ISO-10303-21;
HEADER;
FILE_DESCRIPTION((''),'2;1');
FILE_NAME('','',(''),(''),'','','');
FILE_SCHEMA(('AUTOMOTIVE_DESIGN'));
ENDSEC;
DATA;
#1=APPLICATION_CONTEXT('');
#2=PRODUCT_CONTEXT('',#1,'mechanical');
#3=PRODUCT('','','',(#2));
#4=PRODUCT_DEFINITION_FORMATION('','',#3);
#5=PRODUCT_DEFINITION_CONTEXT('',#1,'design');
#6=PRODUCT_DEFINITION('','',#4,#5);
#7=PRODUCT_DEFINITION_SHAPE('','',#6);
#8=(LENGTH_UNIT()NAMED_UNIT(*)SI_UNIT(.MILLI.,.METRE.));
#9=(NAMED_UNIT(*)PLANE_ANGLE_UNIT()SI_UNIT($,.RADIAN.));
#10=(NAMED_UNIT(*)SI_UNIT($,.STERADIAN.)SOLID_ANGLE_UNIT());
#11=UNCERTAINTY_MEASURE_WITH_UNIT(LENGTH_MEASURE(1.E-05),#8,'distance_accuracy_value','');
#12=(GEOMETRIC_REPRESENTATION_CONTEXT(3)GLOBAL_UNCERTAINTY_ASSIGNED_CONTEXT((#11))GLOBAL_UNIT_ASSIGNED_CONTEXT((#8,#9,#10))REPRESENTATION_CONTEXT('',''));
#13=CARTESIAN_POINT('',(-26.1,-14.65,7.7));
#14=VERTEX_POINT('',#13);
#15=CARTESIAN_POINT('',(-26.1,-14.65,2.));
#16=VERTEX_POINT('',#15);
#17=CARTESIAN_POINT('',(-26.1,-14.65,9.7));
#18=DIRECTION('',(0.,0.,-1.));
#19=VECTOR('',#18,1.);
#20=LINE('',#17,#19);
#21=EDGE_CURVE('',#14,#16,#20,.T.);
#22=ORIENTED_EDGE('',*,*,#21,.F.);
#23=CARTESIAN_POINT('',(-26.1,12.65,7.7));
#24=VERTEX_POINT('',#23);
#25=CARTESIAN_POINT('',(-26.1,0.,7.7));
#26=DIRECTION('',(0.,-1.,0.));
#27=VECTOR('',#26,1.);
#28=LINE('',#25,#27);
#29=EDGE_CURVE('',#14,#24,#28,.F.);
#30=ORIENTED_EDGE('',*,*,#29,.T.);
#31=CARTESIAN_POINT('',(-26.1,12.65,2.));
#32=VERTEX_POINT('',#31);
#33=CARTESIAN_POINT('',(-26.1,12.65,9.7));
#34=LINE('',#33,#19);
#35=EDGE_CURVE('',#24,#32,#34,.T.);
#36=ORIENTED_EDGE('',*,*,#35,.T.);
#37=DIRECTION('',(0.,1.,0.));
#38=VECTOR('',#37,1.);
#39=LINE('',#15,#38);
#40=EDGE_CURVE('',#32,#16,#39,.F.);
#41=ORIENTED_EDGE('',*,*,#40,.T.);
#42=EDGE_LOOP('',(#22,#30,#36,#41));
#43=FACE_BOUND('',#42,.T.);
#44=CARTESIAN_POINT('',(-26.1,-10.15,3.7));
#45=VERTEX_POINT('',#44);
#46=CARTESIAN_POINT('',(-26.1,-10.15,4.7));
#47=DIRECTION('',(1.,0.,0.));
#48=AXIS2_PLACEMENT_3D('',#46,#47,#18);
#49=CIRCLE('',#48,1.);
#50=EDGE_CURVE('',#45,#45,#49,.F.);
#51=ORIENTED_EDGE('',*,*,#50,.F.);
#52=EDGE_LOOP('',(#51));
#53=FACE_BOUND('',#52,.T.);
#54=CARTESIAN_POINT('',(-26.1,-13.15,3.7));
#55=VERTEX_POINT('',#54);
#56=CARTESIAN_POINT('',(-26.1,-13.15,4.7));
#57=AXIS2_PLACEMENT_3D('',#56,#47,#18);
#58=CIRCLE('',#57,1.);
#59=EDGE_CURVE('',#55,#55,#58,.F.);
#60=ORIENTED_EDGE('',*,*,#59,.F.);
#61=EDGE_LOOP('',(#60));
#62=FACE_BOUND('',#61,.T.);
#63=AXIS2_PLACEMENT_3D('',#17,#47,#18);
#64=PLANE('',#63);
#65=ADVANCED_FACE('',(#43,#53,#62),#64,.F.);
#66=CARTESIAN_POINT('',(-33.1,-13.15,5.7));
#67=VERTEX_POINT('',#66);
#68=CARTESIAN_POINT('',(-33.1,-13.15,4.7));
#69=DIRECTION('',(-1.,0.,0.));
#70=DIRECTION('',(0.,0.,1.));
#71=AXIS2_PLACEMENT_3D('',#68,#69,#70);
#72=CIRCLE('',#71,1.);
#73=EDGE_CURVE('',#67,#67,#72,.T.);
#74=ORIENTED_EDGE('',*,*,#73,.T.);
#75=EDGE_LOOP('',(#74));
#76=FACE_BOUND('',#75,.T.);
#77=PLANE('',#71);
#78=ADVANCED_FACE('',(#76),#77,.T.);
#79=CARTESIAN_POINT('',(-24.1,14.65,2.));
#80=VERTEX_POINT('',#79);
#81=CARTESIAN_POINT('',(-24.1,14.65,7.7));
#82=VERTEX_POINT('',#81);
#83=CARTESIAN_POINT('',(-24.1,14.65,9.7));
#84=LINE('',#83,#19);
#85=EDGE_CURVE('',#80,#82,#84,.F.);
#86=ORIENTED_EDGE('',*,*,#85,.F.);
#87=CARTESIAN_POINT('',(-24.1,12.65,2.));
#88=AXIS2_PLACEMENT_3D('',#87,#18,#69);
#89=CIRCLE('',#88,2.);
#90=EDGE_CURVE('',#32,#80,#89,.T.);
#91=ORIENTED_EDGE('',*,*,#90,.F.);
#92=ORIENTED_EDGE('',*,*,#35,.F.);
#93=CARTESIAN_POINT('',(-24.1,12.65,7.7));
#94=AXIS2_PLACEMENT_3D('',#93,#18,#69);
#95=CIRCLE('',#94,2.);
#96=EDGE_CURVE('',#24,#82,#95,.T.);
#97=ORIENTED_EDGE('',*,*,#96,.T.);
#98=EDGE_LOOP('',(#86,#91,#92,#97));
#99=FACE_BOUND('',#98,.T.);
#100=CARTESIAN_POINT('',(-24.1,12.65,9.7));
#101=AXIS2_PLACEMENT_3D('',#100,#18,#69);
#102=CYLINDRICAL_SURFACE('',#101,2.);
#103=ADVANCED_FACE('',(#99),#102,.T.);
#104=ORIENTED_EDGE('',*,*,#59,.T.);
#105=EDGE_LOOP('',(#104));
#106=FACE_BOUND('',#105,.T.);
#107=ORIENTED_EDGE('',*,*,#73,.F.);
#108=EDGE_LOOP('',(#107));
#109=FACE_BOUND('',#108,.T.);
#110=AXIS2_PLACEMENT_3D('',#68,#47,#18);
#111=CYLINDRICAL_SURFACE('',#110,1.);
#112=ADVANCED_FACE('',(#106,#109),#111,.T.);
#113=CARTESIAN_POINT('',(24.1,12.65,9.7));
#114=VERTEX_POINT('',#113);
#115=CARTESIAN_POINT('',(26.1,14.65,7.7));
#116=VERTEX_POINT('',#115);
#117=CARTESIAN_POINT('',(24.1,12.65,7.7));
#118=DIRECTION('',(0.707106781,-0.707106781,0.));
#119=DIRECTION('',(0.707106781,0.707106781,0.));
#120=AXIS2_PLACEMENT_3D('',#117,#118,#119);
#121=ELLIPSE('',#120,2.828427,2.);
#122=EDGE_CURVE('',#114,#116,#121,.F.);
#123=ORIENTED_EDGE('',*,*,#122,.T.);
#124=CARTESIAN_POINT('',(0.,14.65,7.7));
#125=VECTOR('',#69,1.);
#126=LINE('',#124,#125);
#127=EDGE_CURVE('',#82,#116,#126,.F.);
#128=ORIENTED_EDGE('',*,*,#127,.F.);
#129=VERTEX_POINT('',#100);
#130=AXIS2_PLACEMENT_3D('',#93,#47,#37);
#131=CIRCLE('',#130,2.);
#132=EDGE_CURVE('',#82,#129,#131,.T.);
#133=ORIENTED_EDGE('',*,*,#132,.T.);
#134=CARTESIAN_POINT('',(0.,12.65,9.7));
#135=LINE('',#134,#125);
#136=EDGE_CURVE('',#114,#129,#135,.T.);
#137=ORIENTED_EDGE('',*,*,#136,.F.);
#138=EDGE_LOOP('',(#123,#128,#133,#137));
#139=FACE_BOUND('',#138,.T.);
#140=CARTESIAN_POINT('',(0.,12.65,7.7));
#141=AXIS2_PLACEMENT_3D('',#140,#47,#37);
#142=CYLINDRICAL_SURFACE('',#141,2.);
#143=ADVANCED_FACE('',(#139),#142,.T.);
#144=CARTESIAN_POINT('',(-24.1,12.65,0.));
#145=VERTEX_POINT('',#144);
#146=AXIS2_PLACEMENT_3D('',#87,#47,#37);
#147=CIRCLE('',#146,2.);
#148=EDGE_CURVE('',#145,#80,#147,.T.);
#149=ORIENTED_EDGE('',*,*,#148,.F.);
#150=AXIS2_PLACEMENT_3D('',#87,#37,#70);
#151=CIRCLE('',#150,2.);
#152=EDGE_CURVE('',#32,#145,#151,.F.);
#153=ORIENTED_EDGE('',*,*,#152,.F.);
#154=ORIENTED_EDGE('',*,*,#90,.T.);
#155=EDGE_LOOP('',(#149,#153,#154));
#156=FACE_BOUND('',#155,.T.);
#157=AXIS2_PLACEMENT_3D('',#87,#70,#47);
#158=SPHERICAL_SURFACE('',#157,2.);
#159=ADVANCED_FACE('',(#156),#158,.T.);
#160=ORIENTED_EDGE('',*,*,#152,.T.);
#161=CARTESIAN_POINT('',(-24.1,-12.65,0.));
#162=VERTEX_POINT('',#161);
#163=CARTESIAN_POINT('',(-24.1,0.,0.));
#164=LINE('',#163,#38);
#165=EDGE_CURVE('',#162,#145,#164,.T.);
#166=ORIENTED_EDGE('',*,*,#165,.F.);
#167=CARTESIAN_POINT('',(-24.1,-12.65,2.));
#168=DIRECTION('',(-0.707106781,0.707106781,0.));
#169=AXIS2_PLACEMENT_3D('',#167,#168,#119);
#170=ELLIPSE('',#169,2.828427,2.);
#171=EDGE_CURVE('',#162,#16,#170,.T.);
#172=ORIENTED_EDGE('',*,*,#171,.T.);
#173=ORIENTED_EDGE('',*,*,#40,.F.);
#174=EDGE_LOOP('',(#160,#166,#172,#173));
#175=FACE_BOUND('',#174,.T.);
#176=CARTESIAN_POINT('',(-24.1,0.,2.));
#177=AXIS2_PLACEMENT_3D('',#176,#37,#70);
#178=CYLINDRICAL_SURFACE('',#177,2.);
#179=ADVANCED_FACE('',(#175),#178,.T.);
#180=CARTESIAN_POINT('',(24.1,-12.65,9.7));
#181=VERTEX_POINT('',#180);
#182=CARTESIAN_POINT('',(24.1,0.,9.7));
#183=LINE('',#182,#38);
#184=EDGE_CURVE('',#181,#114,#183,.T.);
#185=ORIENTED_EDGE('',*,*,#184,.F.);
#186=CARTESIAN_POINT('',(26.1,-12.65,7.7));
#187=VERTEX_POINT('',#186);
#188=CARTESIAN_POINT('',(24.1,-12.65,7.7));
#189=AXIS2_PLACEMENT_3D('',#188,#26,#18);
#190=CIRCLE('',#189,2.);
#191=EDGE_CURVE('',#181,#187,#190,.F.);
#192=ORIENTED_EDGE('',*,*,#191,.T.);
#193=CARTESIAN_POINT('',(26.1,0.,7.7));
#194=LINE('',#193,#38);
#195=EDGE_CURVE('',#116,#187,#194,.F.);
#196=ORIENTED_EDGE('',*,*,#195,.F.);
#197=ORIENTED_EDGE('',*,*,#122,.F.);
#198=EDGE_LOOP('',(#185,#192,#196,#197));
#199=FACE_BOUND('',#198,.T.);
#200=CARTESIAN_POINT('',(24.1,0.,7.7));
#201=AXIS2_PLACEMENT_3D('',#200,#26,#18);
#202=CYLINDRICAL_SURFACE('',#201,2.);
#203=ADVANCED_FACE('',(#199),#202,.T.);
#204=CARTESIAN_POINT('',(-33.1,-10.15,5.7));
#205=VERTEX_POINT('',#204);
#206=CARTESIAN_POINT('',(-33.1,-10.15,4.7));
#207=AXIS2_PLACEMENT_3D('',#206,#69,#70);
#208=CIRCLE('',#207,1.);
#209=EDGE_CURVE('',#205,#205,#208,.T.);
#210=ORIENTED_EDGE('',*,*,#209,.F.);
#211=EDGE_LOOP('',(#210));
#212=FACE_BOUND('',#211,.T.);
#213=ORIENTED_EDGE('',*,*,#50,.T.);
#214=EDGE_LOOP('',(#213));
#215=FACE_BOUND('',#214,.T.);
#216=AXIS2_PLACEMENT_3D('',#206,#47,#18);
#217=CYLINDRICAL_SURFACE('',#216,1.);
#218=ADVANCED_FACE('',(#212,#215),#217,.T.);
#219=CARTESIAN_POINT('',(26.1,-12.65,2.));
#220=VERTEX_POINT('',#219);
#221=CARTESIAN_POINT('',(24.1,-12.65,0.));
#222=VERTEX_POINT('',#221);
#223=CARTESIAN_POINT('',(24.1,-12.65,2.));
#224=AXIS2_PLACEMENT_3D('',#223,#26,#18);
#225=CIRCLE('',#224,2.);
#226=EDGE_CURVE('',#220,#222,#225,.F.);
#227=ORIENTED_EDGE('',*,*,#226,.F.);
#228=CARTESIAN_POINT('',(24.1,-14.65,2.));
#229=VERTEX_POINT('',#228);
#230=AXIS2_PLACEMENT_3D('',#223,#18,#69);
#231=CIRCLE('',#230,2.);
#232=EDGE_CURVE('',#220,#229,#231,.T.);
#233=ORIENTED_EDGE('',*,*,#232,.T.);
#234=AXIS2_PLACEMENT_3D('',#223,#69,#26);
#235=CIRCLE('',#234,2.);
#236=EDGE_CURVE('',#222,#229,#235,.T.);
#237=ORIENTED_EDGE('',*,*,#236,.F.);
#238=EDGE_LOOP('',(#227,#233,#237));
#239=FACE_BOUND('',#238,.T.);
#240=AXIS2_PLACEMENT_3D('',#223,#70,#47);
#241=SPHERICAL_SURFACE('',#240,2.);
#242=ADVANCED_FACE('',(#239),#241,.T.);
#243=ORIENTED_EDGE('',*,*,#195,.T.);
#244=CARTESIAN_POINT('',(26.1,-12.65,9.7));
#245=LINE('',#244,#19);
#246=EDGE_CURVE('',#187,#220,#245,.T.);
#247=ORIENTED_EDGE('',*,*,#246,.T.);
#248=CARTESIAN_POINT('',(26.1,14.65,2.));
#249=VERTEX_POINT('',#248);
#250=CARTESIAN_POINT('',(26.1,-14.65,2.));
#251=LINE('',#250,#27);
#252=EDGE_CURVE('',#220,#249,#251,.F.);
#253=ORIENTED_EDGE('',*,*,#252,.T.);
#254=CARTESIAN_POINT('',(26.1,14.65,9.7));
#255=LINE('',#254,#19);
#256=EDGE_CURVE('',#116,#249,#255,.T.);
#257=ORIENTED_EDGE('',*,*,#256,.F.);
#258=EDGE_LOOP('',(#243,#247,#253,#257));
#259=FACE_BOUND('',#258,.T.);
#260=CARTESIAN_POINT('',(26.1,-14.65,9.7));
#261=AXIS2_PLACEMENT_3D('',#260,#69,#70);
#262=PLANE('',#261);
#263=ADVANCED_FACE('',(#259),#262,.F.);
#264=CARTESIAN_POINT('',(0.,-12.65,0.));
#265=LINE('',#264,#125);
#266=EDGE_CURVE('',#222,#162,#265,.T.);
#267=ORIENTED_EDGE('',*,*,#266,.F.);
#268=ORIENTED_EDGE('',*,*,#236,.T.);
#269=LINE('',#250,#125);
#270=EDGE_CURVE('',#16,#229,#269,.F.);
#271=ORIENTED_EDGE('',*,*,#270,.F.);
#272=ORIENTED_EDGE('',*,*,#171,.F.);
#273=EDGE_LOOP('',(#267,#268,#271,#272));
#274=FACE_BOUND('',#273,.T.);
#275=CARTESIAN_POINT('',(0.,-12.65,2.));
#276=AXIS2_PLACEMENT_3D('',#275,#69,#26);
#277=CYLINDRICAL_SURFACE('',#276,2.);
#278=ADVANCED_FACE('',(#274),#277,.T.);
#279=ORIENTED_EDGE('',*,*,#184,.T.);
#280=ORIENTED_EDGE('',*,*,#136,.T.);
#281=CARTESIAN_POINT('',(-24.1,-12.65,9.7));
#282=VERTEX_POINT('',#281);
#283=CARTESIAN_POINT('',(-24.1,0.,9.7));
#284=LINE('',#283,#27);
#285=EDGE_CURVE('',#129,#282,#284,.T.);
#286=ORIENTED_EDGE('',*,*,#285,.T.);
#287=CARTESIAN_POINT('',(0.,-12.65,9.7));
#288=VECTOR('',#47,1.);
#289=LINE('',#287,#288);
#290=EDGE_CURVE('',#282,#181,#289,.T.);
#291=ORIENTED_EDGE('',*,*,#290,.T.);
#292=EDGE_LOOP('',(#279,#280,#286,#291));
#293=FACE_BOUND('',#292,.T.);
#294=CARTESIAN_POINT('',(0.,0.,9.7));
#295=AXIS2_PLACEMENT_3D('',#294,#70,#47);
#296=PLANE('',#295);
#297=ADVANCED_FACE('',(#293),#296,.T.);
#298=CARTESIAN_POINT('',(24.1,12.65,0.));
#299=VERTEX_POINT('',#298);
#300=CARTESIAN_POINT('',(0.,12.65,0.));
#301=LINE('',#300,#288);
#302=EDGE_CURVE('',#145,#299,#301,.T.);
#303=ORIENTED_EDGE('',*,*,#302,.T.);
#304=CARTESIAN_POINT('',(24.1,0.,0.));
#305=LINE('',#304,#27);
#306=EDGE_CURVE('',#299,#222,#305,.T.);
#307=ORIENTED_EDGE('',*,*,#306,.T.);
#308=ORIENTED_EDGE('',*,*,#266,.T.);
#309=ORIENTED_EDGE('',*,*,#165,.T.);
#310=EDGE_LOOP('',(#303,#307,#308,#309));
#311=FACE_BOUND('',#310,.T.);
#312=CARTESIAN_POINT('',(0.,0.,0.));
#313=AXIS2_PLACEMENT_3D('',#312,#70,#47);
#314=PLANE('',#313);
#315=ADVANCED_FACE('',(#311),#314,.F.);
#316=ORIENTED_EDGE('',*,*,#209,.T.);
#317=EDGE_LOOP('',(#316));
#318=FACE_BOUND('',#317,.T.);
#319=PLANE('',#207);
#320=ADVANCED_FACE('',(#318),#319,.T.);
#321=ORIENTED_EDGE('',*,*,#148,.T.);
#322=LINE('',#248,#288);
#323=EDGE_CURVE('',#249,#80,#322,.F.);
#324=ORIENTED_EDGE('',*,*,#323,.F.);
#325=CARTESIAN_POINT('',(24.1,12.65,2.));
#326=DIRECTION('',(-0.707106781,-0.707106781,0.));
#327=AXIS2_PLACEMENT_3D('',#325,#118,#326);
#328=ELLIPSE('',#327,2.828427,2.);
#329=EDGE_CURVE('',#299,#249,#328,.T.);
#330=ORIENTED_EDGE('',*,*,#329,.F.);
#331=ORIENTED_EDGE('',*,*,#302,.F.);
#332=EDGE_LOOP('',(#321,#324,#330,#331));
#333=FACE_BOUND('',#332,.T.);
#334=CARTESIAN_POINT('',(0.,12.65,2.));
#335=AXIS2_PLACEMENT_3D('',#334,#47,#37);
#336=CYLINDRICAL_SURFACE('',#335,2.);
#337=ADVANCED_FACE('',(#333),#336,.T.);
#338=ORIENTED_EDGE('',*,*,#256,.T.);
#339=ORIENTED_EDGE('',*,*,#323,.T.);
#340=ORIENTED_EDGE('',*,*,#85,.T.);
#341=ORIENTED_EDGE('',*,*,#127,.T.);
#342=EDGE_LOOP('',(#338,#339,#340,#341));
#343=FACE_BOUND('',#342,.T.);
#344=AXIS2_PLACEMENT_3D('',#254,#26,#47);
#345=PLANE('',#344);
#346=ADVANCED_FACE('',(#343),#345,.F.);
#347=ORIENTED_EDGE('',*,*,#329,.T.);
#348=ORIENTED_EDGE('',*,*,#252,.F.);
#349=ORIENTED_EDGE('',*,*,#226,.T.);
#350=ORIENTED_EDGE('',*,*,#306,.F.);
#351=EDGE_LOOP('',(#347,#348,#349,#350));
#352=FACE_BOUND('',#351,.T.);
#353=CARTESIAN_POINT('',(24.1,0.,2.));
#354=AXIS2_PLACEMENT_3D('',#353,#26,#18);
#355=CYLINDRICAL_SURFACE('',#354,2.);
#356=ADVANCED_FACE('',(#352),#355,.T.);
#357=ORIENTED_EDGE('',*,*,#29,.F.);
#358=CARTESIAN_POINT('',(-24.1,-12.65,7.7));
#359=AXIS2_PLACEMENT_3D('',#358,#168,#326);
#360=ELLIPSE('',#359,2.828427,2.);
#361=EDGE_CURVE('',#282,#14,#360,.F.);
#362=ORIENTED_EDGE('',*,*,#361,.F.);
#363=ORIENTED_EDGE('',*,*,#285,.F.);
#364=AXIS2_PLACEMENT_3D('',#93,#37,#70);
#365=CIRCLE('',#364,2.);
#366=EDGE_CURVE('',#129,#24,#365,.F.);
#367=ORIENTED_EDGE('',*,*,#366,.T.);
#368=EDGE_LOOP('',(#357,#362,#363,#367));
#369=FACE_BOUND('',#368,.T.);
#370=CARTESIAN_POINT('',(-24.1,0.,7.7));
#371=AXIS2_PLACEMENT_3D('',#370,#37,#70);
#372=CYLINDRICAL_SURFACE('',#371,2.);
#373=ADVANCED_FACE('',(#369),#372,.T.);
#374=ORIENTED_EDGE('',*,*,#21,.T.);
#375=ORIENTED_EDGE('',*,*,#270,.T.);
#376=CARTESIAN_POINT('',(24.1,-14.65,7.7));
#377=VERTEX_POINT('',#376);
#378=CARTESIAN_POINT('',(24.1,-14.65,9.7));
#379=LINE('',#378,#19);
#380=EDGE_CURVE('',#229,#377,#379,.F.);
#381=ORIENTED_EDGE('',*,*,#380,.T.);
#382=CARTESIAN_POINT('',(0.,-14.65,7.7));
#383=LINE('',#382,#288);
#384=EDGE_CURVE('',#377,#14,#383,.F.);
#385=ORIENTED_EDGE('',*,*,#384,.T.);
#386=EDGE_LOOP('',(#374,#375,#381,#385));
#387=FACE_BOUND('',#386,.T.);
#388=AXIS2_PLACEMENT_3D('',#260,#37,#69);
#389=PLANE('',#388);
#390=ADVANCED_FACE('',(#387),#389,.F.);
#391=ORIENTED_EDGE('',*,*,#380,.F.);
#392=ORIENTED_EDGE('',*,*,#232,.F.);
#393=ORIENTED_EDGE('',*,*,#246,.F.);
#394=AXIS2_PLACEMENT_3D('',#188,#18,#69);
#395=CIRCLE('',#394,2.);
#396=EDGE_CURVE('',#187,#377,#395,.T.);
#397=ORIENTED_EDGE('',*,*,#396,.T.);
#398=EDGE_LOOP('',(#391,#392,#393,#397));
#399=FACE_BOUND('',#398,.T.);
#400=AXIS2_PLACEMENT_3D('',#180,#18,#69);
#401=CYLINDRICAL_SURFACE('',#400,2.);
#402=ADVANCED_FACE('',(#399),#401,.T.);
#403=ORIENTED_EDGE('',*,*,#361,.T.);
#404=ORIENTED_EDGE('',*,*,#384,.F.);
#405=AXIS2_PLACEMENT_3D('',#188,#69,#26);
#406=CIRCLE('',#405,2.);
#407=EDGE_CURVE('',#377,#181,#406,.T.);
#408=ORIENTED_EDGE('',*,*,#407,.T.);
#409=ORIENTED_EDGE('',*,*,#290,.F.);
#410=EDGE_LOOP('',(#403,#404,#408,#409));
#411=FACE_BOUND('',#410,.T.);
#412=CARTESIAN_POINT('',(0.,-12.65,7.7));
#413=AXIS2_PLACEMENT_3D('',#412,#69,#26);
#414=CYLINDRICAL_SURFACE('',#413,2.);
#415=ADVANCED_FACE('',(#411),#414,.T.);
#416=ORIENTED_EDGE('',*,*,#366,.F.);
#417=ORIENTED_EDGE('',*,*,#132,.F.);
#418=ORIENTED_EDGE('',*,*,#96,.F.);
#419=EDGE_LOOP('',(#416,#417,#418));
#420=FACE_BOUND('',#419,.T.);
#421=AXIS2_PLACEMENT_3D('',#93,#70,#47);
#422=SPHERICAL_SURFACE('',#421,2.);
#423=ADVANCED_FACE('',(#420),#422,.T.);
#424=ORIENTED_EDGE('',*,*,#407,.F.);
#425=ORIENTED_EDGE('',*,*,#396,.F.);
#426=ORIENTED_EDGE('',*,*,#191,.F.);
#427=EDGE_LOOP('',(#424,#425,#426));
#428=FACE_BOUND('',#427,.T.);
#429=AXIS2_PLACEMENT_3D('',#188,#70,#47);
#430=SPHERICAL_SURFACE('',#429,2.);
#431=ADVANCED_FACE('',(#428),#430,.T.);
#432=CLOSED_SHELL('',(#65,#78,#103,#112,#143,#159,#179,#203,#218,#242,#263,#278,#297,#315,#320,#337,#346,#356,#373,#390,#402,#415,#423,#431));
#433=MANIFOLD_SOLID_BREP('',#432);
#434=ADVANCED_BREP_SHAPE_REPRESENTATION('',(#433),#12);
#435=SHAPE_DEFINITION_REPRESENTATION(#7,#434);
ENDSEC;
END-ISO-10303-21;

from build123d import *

# Parameters (mm, degrees)
SKETCH1_W           = 52.2
SKETCH1_H           = 29.3
BOSS_EXTRUDE1_DEPTH = 9.7
SKETCH2_R           = 1
BOSS_EXTRUDE2_DEPTH = 7
FILLET1_R           = 2
FILLET2_R           = 2
FILLET3_R           = 2
FILLET4_R           = 2


with BuildPart() as part:
    # Sketch1 → Boss-Extrude1 (new body)
    with BuildSketch(Plane.XY):
        Rectangle(SKETCH1_W, SKETCH1_H)
    extrude(amount=BOSS_EXTRUDE1_DEPTH)

    # Sketch2 → Boss-Extrude2 (add)
    with BuildSketch(Plane.ZY.offset(26.1)):
        with Locations(Location((4.7, -13.15, 0), (0, 0, 180))):
            Circle(SKETCH2_R)
        with Locations(Location((4.7, -10.15, 0), (0, 0, 180))):
            Circle(SKETCH2_R)
    extrude(amount=BOSS_EXTRUDE2_DEPTH)

    # Fillet1
    fillet1_edges = [part.edges().sort_by_distance(p)[0] for p in [
        (26.1, 0, 9.7),
        (0, 14.65, 9.7),
        (-26.1, 0, 9.7),
        (0, -14.65, 9.7),
    ]]
    fillet(fillet1_edges, radius=FILLET1_R)

    # Fillet2
    fillet2_edges = [part.edges().sort_by_distance(p)[0] for p in [
        (0, 14.65, 0),
        (26.1, 0, 0),
        (0, -14.65, 0),
        (-26.1, 0, 0),
    ]]
    fillet(fillet2_edges, radius=FILLET2_R)

    # Fillet3
    # the kernel refuses this fillet: 2 mm, written as the material it takes off along each edge
    with BuildSketch(Plane(origin=(-24.1, 12.65, 7.7), x_dir=(0, 1, 0), z_dir=(-1, 0, 0))) as fillet3_piece_1_section:
        Polygon((0, 0), (FILLET3_R, 0), (FILLET3_R, -FILLET3_R), (0, -FILLET3_R), align=None)
    fillet3_piece_1 = extrude(amount=FILLET3_R, mode=Mode.PRIVATE)
    fillet3_piece_1 = fillet3_piece_1 - Plane(origin=(-24.1, 12.65, 7.7), x_dir=(0, -0.7071067811865475, -0.7071067811865475), z_dir=(-1, 0, 0)) * Sphere(FILLET3_R, mode=Mode.PRIVATE)
    add(fillet3_piece_1, mode=Mode.SUBTRACT)
    with BuildSketch(Plane(origin=(-24.1, 12.65, 2), x_dir=(0, 1, 0), z_dir=(-1, 0, 0))) as fillet3_piece_2_section:
        Polygon((0, 0), (FILLET3_R, 0), (FILLET3_R, FILLET3_R), (0, FILLET3_R), align=None)
    fillet3_piece_2 = extrude(amount=FILLET3_R, mode=Mode.PRIVATE)
    fillet3_piece_2 = fillet3_piece_2 - Plane(origin=(-24.1, 12.65, 2), x_dir=(0, -0.7071067811865475, 0.7071067811865475), z_dir=(-1, 0, 0)) * Sphere(FILLET3_R, mode=Mode.PRIVATE)
    add(fillet3_piece_2, mode=Mode.SUBTRACT)
    with BuildSketch(Plane(origin=(-26.1, 14.65, 2), x_dir=(0, -1, 0), z_dir=(0, 0, 1))) as fillet3_piece_3:
        with BuildLine():
            CenterArc((FILLET3_R, FILLET3_R), FILLET3_R, 180, 90)
            Line((0, FILLET3_R), (0, 0))
            Line((0, 0), (FILLET3_R, 0))
        make_face()
    extrude(amount=5.7, mode=Mode.SUBTRACT)

    # Fillet4
    # the kernel refuses this fillet: 2 mm, written as the material it takes off along each edge
    with BuildSketch(Plane(origin=(24.1, -12.65, 7.7), x_dir=(1, 0, 0), z_dir=(0, -1, 0))) as fillet4_piece_1_section:
        Polygon((0, 0), (FILLET4_R, 0), (FILLET4_R, FILLET4_R), (0, FILLET4_R), align=None)
    fillet4_piece_1 = extrude(amount=FILLET4_R, mode=Mode.PRIVATE)
    fillet4_piece_1 = fillet4_piece_1 - Plane(origin=(24.1, -12.65, 7.7), x_dir=(-0.7071067811865475, 0, -0.7071067811865475), z_dir=(0, -1, 0)) * Sphere(FILLET4_R, mode=Mode.PRIVATE)
    add(fillet4_piece_1, mode=Mode.SUBTRACT)
    with BuildSketch(Plane(origin=(24.1, -12.65, 2), x_dir=(1, 0, 0), z_dir=(0, -1, 0))) as fillet4_piece_2_section:
        Polygon((0, 0), (FILLET4_R, 0), (FILLET4_R, -FILLET4_R), (0, -FILLET4_R), align=None)
    fillet4_piece_2 = extrude(amount=FILLET4_R, mode=Mode.PRIVATE)
    fillet4_piece_2 = fillet4_piece_2 - Plane(origin=(24.1, -12.65, 2), x_dir=(-0.7071067811865475, 0, 0.7071067811865475), z_dir=(0, -1, 0)) * Sphere(FILLET4_R, mode=Mode.PRIVATE)
    add(fillet4_piece_2, mode=Mode.SUBTRACT)
    with BuildSketch(Plane(origin=(26.1, -14.65, 2), x_dir=(-1, 0, 0), z_dir=(0, 0, 1))) as fillet4_piece_3:
        with BuildLine():
            CenterArc((FILLET4_R, -FILLET4_R), FILLET4_R, 90, 90)
            Line((0, -FILLET4_R), (0, 0))
            Line((0, 0), (FILLET4_R, 0))
        make_face()
    extrude(amount=5.7, mode=Mode.SUBTRACT)


solid = part.part
